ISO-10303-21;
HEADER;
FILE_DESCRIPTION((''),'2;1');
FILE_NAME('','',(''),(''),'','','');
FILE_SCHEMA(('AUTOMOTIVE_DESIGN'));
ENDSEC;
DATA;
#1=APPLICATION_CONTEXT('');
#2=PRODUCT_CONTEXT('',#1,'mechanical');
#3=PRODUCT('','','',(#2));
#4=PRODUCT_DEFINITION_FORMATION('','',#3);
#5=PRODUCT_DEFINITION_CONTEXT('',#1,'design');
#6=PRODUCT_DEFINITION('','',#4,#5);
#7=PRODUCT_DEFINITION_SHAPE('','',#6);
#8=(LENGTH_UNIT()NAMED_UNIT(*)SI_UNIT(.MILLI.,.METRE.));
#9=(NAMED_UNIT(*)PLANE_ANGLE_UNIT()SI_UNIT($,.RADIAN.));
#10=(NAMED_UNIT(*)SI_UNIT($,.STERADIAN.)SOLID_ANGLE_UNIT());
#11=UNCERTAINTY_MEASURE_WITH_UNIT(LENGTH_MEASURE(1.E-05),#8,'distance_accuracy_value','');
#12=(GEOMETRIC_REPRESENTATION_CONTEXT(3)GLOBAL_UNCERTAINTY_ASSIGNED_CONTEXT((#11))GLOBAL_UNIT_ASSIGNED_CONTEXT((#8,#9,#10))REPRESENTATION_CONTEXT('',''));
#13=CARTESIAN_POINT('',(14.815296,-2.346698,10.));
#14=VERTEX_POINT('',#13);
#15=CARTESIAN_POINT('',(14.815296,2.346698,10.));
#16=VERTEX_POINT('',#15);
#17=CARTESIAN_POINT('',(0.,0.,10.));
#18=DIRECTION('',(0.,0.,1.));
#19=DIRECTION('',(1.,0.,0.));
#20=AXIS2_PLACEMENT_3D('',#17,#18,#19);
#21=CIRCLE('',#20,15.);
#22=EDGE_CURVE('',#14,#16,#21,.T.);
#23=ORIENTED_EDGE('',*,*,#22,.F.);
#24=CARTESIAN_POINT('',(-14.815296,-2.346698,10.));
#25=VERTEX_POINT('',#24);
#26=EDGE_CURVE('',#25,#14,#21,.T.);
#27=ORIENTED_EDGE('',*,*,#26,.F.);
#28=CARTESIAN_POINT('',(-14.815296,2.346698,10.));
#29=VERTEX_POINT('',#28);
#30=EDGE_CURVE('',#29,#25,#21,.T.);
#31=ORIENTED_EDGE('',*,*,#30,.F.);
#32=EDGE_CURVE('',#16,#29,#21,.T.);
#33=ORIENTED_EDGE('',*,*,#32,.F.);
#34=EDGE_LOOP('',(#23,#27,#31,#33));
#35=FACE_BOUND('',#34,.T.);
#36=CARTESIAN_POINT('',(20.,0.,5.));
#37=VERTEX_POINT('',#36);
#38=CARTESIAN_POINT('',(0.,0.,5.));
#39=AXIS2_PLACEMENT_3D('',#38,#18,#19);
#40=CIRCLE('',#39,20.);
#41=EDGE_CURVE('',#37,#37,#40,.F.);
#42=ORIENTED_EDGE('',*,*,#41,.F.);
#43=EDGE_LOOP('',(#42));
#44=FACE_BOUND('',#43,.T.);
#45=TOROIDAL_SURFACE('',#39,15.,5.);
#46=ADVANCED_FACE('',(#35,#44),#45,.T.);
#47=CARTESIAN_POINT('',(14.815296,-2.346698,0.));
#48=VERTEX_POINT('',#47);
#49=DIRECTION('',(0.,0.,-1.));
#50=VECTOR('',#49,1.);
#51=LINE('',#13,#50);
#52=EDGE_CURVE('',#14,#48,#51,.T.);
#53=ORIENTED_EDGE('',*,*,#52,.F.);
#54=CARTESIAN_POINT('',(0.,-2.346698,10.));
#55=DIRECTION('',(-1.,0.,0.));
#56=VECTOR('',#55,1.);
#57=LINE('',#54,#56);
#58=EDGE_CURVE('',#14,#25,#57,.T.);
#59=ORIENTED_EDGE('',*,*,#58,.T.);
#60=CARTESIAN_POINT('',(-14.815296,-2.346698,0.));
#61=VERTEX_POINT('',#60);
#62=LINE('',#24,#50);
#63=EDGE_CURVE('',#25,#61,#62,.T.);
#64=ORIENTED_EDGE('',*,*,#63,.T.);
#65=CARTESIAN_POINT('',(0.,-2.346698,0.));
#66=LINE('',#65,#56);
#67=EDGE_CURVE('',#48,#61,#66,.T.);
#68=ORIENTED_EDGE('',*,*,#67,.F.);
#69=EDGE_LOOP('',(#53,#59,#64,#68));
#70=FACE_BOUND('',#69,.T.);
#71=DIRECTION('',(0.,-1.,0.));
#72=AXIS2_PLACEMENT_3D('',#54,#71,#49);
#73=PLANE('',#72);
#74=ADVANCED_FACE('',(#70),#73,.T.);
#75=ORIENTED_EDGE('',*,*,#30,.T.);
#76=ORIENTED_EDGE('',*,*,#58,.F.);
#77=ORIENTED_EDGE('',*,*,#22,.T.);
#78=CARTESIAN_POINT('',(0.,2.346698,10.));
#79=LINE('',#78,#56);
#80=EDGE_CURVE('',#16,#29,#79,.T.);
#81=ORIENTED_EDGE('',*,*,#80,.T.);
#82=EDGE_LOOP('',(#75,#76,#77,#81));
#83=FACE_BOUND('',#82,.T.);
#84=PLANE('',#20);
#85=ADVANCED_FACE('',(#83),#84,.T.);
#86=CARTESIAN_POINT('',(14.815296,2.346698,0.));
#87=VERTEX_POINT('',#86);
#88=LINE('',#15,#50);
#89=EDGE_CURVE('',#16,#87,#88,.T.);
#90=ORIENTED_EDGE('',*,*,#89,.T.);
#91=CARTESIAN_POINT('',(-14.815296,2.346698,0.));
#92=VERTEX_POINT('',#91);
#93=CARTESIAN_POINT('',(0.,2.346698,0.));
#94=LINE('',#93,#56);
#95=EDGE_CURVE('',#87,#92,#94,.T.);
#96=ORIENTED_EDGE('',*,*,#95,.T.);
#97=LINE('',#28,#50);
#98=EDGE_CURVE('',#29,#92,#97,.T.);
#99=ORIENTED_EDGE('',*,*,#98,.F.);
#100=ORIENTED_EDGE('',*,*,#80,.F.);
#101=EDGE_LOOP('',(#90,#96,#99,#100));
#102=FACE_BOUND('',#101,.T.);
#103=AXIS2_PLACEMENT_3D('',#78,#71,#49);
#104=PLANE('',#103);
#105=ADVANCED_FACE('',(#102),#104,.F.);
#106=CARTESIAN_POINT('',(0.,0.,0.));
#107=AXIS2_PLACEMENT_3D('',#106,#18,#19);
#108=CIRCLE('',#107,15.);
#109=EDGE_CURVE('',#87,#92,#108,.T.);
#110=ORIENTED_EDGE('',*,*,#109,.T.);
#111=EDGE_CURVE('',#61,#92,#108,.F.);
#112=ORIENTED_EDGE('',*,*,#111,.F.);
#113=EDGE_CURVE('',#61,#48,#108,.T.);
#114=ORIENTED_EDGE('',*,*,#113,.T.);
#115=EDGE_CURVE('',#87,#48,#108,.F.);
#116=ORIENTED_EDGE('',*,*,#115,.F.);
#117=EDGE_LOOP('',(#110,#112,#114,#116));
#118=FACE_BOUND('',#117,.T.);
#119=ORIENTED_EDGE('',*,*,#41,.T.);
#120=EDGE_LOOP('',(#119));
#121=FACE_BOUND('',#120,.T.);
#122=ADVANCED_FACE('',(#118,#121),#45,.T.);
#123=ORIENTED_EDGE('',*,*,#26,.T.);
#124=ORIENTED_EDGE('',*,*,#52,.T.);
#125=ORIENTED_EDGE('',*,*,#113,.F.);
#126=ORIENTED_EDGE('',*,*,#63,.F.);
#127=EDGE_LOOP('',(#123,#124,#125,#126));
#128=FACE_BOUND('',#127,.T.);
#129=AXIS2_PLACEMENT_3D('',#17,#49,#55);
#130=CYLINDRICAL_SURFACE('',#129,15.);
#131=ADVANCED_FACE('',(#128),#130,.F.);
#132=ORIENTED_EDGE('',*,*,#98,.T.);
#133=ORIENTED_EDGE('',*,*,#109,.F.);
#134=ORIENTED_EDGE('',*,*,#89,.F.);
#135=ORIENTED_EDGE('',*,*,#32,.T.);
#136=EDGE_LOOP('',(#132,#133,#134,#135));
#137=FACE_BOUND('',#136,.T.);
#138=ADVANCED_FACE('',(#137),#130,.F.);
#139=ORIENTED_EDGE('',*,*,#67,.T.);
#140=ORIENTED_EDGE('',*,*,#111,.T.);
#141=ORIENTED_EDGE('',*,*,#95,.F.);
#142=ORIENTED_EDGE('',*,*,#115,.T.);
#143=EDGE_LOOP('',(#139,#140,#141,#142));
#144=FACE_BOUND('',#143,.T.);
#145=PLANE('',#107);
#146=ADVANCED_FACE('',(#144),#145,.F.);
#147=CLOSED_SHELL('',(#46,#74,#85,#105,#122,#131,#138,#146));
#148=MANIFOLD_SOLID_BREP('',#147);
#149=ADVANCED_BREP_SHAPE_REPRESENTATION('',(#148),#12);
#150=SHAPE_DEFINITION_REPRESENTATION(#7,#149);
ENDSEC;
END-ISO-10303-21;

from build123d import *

# Parameters (mm, degrees)
SKETCH1_R           = 20
BOSS_EXTRUDE1_DEPTH = 10
FILLET1_R           = 5


with BuildPart() as part:
    # Sketch1 → Boss-Extrude1 (new body)
    with BuildSketch(Plane.XY):
        Circle(SKETCH1_R)
        with BuildLine():
            Line((14.81529648, 2.346697725), (-14.81529648, 2.346697725))
            ThreePointArc((-14.81529648, 2.346697725), (0, 15), (14.81529648, 2.346697725))
        make_face(mode=Mode.SUBTRACT)
        with BuildLine():
            Line((14.81529648, -2.346697725), (-14.81529648, -2.346697725))
            ThreePointArc((-14.81529648, -2.346697725), (0, -15), (14.81529648, -2.346697725))
        make_face(mode=Mode.SUBTRACT)
    extrude(amount=BOSS_EXTRUDE1_DEPTH)

    # Fillet1
    fillet1_edges = [part.edges().sort_by_distance(p)[0] for p in [
        (-20, 0, 10),
        (-20, 0, 0),
    ]]
    fillet(fillet1_edges, radius=FILLET1_R - 0.0001)  # a hair under: the kernel refuses the full size


solid = part.part
